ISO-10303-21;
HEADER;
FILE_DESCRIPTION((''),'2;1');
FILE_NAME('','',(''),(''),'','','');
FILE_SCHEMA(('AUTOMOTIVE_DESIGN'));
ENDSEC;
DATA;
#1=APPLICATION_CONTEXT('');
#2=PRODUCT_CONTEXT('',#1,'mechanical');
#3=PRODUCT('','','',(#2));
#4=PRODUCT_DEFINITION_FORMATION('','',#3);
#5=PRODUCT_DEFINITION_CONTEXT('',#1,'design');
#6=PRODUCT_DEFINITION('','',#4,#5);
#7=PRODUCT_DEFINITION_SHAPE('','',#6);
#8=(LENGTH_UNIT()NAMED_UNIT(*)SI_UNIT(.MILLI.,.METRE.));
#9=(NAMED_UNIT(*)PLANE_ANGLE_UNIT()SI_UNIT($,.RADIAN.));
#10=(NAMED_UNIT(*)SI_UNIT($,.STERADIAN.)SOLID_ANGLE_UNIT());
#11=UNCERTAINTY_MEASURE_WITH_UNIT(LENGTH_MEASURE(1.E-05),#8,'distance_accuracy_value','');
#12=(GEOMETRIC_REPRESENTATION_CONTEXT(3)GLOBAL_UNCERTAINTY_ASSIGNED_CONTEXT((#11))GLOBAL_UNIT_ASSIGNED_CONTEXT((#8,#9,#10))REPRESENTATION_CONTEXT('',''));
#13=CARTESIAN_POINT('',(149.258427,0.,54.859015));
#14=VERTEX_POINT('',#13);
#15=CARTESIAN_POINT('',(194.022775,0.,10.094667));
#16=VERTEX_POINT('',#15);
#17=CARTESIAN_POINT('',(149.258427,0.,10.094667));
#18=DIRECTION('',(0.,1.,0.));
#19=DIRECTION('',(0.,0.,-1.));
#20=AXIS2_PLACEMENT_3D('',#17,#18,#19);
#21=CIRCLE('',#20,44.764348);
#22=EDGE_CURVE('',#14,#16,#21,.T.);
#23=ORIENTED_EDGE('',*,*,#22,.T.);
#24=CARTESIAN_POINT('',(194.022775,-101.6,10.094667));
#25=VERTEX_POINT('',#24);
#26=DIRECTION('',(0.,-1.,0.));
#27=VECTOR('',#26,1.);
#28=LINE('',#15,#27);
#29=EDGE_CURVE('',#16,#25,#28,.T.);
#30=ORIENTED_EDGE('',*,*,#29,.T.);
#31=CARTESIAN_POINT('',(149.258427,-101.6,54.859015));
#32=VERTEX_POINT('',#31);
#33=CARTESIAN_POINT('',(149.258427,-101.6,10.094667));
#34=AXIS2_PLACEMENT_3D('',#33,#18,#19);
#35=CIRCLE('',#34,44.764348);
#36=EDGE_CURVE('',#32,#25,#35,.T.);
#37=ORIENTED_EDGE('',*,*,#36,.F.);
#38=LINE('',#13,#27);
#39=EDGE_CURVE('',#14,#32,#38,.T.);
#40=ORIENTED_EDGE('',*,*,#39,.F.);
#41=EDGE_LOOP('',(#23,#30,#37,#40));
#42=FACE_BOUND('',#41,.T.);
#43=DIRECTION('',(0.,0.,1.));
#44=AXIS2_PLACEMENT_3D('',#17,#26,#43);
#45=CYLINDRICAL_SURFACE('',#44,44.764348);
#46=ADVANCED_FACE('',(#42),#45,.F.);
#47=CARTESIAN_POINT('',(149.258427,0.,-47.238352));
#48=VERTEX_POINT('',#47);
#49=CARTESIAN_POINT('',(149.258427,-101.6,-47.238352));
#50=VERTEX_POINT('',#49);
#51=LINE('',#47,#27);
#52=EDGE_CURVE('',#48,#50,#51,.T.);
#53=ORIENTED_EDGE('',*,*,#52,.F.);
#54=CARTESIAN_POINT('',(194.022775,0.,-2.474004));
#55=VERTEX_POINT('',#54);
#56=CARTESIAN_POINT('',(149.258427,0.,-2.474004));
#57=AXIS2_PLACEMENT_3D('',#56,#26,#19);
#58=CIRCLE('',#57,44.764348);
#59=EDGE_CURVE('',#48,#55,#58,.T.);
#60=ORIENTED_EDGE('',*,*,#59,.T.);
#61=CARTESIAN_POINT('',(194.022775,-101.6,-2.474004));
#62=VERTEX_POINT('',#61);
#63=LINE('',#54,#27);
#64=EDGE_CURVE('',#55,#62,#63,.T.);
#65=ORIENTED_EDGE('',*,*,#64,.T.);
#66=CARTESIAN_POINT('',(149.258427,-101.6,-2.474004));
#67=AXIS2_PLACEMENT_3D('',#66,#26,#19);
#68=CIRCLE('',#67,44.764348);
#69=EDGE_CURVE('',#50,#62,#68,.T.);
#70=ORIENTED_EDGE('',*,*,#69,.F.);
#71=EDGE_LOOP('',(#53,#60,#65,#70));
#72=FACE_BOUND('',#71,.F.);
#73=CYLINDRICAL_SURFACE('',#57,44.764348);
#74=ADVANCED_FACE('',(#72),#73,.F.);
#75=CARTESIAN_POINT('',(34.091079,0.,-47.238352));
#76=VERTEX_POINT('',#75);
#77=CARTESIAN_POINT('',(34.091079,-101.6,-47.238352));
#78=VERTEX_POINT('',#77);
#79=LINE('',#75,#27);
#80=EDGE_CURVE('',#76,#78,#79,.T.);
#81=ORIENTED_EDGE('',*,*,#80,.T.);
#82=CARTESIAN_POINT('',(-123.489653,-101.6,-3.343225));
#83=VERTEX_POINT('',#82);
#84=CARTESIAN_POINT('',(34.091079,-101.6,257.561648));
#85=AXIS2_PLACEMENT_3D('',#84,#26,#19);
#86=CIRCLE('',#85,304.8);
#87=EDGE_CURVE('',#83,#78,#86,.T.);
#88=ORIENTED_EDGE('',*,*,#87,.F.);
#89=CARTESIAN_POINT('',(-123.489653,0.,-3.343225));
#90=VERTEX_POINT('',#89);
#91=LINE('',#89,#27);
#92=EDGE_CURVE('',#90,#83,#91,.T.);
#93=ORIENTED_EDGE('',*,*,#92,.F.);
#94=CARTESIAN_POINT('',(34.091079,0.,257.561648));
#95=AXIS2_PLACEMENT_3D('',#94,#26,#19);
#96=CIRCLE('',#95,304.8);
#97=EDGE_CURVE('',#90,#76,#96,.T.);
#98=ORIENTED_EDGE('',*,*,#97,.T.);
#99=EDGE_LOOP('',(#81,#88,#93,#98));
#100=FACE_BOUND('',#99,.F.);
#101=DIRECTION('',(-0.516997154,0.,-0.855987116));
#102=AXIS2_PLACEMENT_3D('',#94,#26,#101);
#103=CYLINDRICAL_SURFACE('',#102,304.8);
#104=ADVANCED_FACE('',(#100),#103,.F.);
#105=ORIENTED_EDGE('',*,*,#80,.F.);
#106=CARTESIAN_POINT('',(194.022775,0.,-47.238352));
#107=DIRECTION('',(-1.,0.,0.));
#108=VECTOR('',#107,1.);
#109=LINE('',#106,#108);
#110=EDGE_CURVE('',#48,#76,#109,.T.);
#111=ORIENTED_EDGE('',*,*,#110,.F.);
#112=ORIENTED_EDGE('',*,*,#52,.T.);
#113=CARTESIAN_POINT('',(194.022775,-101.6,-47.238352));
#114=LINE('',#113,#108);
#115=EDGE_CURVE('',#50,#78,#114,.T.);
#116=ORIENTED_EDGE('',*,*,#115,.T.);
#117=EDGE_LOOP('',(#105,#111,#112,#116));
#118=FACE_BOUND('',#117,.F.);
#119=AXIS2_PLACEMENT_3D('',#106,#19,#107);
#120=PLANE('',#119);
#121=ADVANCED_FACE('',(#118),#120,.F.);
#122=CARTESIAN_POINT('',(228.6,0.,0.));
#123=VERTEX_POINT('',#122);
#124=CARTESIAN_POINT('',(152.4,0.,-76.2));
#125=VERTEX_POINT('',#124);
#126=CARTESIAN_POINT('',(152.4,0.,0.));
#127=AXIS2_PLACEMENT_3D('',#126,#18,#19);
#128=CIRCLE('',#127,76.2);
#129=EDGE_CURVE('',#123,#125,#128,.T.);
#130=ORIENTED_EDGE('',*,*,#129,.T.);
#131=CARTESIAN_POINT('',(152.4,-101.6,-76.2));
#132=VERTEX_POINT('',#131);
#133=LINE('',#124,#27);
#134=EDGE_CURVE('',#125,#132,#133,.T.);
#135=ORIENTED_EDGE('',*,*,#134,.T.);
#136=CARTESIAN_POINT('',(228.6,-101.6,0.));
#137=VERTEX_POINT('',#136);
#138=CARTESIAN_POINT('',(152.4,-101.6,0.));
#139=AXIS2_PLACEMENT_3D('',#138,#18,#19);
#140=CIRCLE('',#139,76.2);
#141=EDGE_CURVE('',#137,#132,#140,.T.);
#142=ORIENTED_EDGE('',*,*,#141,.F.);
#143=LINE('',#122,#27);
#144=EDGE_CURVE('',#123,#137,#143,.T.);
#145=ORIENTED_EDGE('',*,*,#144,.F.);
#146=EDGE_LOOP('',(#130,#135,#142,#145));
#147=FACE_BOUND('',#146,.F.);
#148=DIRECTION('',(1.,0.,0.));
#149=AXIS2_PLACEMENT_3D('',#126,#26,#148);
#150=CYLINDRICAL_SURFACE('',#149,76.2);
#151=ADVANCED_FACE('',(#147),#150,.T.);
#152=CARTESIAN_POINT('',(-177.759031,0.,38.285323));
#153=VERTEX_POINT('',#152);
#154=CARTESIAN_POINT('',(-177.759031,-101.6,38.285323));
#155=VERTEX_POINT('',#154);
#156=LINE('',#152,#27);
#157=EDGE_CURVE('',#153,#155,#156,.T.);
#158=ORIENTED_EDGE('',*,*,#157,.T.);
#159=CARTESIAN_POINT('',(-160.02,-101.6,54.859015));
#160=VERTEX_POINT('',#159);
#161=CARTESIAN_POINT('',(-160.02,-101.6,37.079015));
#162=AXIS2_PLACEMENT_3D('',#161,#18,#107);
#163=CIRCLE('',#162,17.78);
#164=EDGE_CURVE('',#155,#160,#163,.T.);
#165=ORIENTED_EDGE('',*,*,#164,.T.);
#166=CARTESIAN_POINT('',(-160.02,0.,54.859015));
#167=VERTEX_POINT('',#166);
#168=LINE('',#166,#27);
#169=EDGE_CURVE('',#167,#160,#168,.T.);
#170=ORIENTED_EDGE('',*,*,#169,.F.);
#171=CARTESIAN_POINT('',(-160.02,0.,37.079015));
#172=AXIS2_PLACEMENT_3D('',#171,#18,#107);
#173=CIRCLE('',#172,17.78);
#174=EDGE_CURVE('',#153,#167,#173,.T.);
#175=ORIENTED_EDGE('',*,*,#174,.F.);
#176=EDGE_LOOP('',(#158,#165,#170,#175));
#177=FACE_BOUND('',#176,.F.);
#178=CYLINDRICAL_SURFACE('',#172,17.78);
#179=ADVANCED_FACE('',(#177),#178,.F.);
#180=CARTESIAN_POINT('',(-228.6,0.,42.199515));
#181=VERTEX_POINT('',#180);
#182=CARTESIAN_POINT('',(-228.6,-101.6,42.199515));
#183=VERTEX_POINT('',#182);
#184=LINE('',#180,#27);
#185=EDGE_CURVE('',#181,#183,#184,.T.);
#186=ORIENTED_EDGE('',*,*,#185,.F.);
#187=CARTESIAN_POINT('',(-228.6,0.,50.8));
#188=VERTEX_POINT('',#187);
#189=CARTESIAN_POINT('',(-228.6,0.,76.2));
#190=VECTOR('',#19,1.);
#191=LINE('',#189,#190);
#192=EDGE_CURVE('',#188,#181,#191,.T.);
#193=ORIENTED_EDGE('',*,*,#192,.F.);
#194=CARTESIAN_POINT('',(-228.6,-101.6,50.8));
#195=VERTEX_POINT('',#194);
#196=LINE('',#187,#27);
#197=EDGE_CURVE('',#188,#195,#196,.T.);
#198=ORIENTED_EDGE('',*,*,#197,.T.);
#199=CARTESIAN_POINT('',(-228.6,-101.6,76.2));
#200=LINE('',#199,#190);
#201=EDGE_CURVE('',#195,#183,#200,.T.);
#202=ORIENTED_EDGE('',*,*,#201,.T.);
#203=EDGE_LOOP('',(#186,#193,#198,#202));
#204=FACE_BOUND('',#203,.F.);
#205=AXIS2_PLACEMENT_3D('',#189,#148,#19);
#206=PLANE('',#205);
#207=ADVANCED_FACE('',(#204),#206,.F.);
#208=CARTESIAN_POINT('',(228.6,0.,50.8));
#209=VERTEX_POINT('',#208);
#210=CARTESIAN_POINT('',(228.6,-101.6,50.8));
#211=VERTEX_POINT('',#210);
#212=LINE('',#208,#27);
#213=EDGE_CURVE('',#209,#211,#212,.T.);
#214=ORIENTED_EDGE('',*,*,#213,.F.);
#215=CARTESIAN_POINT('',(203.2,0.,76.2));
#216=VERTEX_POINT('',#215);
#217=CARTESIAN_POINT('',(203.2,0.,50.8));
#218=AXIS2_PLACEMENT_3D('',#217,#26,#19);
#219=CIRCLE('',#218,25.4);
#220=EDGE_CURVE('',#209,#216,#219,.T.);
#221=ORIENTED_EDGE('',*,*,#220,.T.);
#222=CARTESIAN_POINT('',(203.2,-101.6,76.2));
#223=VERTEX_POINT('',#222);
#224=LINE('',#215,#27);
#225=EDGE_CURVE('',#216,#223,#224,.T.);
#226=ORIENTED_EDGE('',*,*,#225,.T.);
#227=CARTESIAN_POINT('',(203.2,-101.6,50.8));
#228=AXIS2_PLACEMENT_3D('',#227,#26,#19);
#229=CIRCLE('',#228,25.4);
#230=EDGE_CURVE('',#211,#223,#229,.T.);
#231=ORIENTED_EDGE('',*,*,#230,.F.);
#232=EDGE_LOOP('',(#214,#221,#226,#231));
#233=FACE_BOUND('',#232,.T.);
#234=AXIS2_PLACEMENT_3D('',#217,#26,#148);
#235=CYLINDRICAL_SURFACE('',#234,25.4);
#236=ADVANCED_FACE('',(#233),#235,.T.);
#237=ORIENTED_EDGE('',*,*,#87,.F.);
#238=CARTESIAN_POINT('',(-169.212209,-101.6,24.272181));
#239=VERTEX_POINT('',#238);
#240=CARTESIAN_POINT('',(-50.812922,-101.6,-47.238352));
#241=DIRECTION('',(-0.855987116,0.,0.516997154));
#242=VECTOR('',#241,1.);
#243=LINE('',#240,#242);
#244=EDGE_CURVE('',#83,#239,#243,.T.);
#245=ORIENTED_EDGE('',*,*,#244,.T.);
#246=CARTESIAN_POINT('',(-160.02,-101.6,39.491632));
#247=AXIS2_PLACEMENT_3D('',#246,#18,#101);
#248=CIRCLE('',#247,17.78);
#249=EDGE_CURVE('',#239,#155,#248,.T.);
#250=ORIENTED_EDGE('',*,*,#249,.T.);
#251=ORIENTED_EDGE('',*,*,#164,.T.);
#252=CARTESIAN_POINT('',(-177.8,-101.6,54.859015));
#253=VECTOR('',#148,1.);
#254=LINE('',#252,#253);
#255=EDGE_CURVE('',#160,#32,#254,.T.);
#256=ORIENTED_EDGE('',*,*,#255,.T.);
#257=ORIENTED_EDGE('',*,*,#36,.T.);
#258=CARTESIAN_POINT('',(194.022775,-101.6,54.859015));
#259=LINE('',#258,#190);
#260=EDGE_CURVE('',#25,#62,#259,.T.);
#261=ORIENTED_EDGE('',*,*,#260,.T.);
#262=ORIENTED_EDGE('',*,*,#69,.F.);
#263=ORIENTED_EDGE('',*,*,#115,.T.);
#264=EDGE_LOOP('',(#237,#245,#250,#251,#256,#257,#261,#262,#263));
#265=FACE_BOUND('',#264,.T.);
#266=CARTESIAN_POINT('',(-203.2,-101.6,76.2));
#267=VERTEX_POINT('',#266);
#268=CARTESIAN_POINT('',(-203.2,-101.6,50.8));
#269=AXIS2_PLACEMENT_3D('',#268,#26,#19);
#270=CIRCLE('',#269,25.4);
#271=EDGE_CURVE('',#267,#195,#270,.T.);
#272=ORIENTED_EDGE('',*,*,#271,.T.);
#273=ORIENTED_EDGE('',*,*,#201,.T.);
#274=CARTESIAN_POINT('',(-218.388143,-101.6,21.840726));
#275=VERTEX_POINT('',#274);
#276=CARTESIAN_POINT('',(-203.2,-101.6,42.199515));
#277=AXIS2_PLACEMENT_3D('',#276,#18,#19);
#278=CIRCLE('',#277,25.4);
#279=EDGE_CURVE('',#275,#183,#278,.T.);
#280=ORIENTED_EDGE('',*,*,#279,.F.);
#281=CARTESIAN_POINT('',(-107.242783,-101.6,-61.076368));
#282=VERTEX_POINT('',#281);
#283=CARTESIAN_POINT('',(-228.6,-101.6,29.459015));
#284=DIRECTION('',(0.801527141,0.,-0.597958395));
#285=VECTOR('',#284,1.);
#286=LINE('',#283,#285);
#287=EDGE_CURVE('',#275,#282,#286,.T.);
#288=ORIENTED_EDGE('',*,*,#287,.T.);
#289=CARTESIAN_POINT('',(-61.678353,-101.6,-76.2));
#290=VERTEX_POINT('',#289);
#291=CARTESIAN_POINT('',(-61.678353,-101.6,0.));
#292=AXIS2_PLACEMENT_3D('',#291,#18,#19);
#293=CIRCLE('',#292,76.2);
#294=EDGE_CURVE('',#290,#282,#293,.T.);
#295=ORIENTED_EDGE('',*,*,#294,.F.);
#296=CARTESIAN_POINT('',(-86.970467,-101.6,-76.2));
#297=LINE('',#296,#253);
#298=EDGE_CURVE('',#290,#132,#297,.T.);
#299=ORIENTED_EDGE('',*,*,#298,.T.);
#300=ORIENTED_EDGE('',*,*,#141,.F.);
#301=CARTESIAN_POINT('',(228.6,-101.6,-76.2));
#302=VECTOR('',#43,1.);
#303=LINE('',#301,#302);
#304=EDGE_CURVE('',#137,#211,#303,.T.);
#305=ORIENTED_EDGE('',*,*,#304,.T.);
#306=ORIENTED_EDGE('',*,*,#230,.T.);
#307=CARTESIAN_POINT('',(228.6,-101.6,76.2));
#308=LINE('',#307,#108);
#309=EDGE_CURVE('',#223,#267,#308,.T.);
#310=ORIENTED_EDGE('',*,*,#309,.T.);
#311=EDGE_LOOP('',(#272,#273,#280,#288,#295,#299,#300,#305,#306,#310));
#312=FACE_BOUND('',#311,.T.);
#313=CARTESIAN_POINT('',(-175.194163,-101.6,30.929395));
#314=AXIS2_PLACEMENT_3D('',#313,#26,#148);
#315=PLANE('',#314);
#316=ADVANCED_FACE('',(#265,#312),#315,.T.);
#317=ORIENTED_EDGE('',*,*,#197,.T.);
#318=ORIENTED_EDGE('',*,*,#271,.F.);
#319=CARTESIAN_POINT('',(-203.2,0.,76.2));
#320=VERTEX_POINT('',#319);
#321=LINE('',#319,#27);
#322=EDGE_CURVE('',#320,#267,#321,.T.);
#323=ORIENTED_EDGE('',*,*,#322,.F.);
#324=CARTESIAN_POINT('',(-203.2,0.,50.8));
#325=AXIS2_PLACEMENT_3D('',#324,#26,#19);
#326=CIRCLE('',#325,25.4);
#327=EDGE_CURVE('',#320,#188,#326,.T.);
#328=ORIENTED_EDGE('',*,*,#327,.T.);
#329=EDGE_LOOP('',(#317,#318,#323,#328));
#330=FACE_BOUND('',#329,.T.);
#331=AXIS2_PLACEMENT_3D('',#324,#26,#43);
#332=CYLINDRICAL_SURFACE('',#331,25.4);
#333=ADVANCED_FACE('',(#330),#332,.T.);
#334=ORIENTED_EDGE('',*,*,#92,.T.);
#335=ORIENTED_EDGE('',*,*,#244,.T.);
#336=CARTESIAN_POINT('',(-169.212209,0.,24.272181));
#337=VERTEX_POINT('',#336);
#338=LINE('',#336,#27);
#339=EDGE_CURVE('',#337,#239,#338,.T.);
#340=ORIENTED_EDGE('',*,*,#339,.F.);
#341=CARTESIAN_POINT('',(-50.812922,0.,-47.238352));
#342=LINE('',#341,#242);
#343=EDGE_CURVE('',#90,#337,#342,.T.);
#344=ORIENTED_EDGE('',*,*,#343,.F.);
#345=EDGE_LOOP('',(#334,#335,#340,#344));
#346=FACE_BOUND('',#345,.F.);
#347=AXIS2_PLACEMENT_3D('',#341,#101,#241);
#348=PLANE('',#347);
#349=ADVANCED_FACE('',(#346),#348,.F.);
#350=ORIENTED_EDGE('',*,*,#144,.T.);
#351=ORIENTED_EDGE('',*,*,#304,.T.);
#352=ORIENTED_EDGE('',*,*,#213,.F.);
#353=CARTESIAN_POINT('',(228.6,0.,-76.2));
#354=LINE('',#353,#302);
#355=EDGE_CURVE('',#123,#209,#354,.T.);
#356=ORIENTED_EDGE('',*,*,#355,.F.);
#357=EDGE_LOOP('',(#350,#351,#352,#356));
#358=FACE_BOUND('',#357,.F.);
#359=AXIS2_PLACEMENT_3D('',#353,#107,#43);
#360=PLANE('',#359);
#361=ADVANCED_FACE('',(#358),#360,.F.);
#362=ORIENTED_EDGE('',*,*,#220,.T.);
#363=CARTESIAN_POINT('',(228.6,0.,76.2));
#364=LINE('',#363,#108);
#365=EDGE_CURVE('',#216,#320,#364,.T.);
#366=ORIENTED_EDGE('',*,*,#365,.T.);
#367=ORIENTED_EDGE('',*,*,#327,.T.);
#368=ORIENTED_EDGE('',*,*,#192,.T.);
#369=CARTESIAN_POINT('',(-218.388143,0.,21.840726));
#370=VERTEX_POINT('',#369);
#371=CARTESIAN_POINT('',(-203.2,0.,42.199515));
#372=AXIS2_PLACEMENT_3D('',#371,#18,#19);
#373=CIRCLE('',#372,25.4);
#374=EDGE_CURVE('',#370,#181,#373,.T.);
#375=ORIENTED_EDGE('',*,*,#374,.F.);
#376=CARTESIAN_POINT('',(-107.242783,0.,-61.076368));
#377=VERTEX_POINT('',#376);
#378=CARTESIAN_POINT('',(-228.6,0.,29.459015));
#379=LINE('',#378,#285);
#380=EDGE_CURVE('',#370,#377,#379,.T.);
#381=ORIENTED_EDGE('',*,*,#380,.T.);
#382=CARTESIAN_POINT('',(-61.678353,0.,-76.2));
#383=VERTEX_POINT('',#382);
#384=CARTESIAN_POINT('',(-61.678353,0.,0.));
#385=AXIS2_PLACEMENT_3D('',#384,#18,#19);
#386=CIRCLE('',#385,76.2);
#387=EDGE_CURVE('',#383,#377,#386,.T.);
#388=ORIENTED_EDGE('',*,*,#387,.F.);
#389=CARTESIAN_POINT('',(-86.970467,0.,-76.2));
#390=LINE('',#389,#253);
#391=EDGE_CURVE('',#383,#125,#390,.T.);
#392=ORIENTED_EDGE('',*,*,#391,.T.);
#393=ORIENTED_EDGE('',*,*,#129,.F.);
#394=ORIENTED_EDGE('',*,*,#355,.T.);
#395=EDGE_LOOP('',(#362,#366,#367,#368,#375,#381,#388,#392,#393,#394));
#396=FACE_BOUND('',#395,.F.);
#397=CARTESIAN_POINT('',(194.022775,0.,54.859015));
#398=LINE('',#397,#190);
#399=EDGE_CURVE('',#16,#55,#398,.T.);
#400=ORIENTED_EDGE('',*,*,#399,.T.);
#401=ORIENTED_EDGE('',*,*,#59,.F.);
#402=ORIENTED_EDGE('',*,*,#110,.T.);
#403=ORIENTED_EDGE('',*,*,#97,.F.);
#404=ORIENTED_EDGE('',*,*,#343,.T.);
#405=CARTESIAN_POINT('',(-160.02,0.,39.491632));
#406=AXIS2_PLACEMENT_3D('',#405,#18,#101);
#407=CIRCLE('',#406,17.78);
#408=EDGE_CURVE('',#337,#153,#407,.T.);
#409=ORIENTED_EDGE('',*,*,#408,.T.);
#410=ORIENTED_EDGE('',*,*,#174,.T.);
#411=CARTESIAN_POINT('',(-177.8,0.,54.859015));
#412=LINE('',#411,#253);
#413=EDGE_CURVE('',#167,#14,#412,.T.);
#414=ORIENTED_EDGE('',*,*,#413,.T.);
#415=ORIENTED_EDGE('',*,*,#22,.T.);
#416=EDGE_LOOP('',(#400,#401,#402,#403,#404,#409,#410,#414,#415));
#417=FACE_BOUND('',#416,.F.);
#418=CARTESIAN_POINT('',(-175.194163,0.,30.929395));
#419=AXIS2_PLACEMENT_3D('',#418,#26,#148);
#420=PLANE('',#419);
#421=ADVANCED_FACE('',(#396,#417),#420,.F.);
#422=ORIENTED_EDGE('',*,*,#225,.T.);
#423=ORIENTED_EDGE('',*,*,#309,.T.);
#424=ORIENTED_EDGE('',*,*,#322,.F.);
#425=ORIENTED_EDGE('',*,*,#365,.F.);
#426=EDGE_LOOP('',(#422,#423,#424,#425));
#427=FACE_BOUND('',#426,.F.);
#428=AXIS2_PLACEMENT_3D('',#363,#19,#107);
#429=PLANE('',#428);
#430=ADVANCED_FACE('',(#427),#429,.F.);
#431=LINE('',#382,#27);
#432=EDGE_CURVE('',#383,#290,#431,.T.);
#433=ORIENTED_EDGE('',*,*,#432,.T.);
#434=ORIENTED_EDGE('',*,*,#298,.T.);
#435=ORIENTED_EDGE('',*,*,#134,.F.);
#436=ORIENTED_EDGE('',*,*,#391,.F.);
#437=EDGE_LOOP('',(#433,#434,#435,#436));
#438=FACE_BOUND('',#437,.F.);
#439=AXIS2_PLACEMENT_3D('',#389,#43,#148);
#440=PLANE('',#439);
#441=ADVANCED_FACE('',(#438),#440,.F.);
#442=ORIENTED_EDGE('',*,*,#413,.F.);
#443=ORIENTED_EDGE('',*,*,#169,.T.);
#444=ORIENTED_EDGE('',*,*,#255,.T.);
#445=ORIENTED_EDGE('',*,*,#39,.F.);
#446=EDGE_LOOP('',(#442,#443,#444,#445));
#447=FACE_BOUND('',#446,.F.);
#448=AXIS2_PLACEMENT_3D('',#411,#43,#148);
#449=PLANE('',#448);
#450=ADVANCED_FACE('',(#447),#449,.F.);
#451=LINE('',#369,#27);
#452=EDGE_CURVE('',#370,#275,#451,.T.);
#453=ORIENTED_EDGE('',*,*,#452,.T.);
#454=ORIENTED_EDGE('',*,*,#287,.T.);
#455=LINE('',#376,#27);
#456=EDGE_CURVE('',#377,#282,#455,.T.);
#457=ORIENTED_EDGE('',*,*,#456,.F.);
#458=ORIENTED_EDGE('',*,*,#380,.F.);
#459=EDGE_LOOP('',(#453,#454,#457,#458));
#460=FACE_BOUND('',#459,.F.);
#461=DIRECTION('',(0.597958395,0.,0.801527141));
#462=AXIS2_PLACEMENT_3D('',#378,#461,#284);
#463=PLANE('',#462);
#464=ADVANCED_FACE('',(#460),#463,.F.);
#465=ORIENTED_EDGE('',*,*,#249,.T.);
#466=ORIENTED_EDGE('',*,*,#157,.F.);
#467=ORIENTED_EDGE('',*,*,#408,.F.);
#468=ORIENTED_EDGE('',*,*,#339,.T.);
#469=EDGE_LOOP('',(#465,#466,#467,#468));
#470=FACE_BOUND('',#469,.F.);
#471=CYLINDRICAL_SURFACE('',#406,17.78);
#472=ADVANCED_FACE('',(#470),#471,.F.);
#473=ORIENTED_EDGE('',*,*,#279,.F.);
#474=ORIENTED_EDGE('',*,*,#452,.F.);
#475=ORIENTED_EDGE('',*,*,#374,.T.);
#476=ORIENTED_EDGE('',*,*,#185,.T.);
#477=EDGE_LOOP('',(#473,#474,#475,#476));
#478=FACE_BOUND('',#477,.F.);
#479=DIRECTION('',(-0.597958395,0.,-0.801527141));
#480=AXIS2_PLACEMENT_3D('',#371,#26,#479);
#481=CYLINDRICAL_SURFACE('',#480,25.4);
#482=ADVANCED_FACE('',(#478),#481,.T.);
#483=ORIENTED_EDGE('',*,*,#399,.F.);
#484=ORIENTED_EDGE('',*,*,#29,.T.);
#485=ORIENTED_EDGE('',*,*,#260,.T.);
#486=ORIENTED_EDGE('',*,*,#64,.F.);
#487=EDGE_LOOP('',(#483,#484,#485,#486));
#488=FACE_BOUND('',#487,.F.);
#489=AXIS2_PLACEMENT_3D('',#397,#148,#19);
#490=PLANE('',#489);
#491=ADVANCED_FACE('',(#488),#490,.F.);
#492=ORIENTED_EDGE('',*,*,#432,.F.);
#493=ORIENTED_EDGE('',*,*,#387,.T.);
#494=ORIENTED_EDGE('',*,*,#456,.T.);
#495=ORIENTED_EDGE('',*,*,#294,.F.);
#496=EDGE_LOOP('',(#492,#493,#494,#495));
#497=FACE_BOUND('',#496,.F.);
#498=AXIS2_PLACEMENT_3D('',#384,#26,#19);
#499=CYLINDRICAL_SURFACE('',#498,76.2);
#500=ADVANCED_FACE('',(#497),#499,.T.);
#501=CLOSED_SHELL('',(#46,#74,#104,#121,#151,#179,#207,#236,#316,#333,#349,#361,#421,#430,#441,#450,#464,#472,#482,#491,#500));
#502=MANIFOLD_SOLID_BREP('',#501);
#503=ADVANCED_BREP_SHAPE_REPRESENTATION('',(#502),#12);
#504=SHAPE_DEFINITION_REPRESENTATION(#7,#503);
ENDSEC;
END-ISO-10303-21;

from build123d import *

# Parameters (mm, degrees)
F1_DEPTH    = 101.6
F2_R        = 25.4
F3_R        = 76.2
F4_R        = 25.4
F5_T1_DEPTH = 101.6
F6_R        = 44.7643478735
F7_R        = 304.8


# Not quite as in the source:
# - a fillet or chamfer that OpenCascade refuses, or shapes differently, is made with other operations: its cross-section is extruded or revolved along the edge and cut away or added


with BuildPart() as f1:
    # F0 (on Front) → F1 (new body)
    with BuildSketch(Plane.XZ):
        Polygon((228.6, -76.2), (228.6, 76.2), (-228.6, 76.2), (-228.6, 29.4590149546), (-86.9704671455, -76.2), align=None)
        Polygon((-50.8129218496, -47.2383520842), (-177.8, 29.4590149546), (-177.8, 54.8590149546), (194.0227749825, 54.8590149546), (194.0227749825, -47.2383520842), align=None, mode=Mode.SUBTRACT)
    extrude(amount=F1_DEPTH)

    # F2
    f2_edges = [f1.edges().sort_by_distance(p)[0] for p in [
        (-228.6, -50.8, 76.2),
        (-228.6, -50.8, 29.459015),
    ]]
    fillet(f2_edges, radius=F2_R)

    # F3
    f3_edges = [f1.edges().sort_by_distance(p)[0] for p in [
        (-86.970467, -50.8, -76.2),
        (228.6, -50.8, -76.2),
    ]]
    fillet(f3_edges, radius=F3_R)

    # F4
    f4_edges = [f1.edges().sort_by_distance(p)[0] for p in [
        (228.6, -50.8, 76.2),
    ]]
    fillet(f4_edges, radius=F4_R)

    # F5: fillet of radius 17.78 on 2 edges, made by hand

    # F5_s2 → F5_t1 (join)
    with BuildSketch(Plane.XZ):
        with BuildLine():
            ThreePointArc((-169.2122093999, 24.2721806932), (-175.5049262693, 30.7540427919), (-177.8, 39.4916316146))
            Line((-177.8, 39.4916316146), (-177.8, 29.4590149546))
            Line((-177.8, 29.4590149546), (-169.2122093999, 24.2721806932))
        make_face()
        with BuildLine():
            ThreePointArc((-177.8, 37.0790149546), (-172.5923585695, 49.6513735241), (-160.02, 54.8590149546))
            Line((-160.02, 54.8590149546), (-177.8, 54.8590149546))
            Line((-177.8, 54.8590149546), (-177.8, 37.0790149546))
        make_face()
    extrude(amount=F5_T1_DEPTH)

    # F6
    f6_edges = [f1.edges().sort_by_distance(p)[0] for p in [
        (194.022775, -50.8, -47.238352),
        (194.022775, -50.8, 54.859015),
    ]]
    fillet(f6_edges, radius=F6_R)

    # F7
    f7_edges = [f1.edges().sort_by_distance(p)[0] for p in [
        (-50.812922, -50.8, -47.238352),
    ]]
    fillet(f7_edges, radius=F7_R)


solid = f1.part
